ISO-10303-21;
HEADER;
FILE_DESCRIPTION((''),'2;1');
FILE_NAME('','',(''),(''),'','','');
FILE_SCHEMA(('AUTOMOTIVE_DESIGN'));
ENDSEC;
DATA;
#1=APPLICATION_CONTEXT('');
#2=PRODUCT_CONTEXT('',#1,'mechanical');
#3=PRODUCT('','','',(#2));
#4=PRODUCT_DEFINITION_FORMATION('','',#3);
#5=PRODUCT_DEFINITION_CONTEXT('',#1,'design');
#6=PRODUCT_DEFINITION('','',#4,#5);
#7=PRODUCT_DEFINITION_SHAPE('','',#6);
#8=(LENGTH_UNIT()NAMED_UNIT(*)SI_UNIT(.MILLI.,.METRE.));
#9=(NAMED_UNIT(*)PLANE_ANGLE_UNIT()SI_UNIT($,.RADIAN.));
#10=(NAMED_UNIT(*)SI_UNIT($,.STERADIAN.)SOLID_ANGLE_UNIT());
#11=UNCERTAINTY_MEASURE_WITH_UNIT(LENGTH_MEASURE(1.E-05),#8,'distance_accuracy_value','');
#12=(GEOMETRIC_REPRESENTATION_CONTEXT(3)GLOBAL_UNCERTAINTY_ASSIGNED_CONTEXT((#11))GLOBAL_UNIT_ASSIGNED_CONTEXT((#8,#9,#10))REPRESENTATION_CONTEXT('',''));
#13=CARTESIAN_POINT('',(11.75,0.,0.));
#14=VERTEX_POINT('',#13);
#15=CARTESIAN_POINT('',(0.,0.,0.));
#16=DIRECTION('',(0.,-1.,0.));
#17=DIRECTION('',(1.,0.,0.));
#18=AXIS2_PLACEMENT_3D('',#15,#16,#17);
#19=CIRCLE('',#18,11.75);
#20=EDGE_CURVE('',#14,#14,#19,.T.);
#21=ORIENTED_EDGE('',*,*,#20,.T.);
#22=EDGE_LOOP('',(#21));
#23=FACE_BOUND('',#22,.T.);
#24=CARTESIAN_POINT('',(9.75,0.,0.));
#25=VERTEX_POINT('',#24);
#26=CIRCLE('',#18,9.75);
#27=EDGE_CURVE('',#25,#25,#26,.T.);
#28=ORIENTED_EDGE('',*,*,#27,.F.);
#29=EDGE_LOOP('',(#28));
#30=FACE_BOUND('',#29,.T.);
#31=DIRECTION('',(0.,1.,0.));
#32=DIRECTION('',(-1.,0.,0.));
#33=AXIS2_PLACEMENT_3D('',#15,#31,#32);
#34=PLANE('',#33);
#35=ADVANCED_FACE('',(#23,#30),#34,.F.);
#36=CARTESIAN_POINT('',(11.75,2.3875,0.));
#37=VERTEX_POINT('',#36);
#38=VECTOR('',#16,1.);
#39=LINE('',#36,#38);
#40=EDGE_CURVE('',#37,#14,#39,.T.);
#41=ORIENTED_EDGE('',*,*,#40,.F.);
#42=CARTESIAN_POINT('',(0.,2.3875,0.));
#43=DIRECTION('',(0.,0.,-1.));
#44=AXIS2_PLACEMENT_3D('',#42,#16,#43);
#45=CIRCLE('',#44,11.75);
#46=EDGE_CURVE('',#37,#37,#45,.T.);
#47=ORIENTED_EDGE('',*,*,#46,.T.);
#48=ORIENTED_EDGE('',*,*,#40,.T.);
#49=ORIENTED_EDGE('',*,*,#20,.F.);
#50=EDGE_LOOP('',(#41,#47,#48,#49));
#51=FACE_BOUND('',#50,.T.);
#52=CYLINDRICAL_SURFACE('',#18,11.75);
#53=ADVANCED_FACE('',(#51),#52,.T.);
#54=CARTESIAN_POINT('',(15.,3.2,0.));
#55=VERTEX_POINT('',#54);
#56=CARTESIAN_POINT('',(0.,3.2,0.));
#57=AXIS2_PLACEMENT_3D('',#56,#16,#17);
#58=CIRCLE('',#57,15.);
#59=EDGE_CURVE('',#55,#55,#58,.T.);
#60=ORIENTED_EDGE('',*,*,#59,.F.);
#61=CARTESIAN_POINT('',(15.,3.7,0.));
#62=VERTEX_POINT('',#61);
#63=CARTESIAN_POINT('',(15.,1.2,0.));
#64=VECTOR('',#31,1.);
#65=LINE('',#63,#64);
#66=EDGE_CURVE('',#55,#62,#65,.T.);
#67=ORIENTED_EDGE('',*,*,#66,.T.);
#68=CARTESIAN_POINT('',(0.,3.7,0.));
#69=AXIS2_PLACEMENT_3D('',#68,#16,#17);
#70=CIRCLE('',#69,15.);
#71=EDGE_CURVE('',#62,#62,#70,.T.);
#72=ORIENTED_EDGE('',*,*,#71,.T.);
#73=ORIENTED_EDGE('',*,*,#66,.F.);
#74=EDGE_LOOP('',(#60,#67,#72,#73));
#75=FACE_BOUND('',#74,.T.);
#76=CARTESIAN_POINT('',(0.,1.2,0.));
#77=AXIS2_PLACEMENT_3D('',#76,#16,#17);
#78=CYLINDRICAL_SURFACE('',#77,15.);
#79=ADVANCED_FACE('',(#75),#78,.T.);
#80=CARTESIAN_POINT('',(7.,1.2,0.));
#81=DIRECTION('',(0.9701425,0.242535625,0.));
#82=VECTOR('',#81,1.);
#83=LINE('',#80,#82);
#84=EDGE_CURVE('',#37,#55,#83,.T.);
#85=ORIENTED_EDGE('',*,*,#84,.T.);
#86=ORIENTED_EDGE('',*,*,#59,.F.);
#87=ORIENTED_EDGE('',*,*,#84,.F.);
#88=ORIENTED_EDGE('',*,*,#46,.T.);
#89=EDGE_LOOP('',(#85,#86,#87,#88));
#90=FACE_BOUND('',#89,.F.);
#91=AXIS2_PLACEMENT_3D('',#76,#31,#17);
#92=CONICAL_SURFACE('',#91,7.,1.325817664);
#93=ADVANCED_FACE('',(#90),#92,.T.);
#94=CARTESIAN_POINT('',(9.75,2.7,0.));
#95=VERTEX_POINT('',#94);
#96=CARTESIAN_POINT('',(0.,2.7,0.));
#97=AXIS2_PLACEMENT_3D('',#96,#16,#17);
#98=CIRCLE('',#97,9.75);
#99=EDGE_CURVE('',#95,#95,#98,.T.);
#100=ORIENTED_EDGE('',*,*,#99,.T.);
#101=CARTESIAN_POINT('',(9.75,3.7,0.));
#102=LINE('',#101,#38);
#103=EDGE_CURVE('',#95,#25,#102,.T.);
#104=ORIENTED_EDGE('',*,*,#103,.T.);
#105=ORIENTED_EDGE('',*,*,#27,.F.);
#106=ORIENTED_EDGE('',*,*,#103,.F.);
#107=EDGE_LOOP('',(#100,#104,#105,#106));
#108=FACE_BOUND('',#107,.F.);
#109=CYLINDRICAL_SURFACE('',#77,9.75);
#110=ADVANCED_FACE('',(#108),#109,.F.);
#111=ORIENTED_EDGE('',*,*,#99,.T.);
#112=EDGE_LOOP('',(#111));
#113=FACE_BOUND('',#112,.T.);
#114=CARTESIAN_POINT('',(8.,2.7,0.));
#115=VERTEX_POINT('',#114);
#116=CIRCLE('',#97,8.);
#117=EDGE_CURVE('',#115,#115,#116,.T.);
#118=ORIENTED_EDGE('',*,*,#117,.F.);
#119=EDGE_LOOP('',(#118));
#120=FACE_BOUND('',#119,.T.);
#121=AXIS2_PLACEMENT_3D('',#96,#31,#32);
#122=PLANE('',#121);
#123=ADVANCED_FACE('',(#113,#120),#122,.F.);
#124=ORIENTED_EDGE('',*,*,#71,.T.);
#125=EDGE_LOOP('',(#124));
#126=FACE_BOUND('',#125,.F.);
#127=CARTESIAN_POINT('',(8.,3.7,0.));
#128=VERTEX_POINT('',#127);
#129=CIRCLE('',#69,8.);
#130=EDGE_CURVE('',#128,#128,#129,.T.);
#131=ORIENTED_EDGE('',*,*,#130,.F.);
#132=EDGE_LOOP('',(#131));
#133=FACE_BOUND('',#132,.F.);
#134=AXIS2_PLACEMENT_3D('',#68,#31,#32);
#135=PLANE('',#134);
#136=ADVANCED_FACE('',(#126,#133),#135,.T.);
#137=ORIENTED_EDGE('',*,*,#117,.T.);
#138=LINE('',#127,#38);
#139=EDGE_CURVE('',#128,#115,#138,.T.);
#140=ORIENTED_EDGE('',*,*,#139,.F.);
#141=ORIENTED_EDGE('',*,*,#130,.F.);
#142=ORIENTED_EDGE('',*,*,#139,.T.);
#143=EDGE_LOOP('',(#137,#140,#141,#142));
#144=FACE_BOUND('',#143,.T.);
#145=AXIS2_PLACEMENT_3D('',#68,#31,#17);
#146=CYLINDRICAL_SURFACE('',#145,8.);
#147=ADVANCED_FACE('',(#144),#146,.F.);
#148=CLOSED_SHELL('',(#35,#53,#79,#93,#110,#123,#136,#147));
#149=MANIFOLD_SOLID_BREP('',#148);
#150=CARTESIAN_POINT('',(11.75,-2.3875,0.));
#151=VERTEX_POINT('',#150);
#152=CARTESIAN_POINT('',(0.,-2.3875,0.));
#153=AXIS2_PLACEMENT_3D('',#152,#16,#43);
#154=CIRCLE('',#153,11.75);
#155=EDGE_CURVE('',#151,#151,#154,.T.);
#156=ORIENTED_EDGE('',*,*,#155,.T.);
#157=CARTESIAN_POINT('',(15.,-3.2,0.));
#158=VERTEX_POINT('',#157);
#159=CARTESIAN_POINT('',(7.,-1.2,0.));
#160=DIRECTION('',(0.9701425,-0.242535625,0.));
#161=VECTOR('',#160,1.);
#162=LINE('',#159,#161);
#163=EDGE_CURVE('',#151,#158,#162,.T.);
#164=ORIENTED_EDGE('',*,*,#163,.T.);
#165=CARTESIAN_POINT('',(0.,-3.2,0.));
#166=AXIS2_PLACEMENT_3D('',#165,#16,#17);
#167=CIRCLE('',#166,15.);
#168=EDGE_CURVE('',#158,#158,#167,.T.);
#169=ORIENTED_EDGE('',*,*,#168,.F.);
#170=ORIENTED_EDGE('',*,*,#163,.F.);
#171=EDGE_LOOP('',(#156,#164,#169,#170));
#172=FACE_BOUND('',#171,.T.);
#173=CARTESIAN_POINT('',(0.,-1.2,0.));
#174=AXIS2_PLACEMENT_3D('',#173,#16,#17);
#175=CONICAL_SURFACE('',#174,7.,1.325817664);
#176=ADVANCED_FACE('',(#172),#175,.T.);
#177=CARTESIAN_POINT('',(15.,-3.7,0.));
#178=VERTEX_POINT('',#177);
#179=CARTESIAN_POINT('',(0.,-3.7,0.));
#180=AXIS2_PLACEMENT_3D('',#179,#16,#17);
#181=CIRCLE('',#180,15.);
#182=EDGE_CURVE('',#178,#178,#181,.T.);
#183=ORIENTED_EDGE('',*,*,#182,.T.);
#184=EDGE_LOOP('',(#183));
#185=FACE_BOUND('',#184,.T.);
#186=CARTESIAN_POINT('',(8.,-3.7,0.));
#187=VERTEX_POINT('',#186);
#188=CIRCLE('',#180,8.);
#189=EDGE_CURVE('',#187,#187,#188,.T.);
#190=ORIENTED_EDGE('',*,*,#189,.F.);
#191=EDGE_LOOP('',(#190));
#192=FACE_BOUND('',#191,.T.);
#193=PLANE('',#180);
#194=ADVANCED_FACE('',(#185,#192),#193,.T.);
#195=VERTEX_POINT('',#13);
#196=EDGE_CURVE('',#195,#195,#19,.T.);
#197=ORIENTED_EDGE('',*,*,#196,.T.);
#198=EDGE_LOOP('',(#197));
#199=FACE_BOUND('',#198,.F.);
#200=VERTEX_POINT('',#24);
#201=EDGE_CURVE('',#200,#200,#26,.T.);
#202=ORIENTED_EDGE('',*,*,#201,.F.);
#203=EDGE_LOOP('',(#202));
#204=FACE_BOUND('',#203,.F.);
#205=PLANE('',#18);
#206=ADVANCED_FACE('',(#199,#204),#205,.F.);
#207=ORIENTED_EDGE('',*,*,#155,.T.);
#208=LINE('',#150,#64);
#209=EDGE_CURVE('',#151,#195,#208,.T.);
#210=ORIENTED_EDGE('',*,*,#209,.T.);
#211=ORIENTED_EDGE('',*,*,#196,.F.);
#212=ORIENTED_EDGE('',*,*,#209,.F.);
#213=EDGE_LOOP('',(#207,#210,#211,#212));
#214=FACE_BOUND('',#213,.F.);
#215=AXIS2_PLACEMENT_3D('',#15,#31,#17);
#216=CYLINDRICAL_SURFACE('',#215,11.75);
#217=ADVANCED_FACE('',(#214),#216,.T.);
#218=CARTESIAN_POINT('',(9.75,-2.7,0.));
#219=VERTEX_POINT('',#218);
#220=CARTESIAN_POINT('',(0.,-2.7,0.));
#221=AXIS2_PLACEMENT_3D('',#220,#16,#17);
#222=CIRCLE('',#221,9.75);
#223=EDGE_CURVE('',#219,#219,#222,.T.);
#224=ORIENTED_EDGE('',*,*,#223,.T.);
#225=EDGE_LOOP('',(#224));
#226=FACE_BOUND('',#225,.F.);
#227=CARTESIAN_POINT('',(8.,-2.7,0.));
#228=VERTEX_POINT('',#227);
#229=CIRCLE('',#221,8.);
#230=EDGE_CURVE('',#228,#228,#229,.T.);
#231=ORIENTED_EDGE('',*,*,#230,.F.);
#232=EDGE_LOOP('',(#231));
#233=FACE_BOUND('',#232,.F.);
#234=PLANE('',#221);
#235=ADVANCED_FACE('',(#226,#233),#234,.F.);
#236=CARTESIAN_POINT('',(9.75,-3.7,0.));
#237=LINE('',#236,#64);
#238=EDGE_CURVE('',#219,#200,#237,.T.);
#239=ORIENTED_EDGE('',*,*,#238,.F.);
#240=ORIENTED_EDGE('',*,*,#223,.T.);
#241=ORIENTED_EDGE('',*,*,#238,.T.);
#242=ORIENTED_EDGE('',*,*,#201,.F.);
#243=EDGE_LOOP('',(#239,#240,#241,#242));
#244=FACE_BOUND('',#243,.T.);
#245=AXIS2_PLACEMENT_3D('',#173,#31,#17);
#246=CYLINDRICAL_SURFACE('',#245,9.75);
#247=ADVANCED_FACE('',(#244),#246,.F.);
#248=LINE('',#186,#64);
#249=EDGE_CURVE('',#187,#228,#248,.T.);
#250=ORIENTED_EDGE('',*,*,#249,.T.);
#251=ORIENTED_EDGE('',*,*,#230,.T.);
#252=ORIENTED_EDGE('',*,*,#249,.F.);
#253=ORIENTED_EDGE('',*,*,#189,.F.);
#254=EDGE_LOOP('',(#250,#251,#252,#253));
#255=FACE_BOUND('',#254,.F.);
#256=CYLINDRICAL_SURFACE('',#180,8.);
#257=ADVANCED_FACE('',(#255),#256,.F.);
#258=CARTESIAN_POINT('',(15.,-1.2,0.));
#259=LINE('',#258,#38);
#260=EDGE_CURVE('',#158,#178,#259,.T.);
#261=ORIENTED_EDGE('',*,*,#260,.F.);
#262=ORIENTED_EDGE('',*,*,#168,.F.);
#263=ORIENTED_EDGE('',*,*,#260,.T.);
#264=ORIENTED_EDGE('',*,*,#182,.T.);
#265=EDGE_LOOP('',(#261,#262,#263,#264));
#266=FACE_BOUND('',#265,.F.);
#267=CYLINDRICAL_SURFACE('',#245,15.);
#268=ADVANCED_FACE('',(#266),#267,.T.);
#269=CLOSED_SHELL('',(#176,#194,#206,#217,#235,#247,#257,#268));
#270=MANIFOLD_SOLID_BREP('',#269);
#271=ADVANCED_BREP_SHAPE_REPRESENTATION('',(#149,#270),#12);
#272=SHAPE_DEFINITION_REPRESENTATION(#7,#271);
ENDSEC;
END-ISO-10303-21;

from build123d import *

# Parameters (mm, degrees)
F0_R        = 11.75
F0_R_2      = 9.75
F1_DEPTH    = 1.2
F2_R        = 15
F2_R_2      = 11.75
F2_R_3      = 9.75
F3_DEPTH    = 2.5
F4_S5_R     = 11.75
F4_T6_DEPTH = 23
F5_R        = 9.75
F5_R_2      = 8
F6_DEPTH    = 1


# Not quite as in the source:
# - a fillet or chamfer that OpenCascade refuses, or shapes differently, is made with other operations: its cross-section is extruded or revolved along the edge and cut away or added


with BuildPart() as f1:
    # F0 (on Front) → F1 (new body)
    with BuildSketch(Plane.XZ):
        Circle(F0_R)
        Circle(F0_R_2, mode=Mode.SUBTRACT)
    extrude(amount=F1_DEPTH)

    # F2 (on face) → F3 (join)
    with BuildSketch(Plane.XZ.offset(1.2)):
        Circle(F2_R)
        Circle(F2_R_2, mode=Mode.SUBTRACT)
        Circle(F2_R_2)
        Circle(F2_R_3, mode=Mode.SUBTRACT)
    extrude(amount=F3_DEPTH)

    # F4: chamfer of 2 x 8 on 1 edges, made by hand


with BuildPart() as f4_tool2:
    # F4_s3 → F4_t4 (revolve)
    with BuildSketch(Plane.XY):
        Polygon((7, -1.2), (15, -3.2), (15, -1.2), align=None)
    revolve(axis=Axis((0, -1.2, 0), (0, -1, 0)))

    # F4_s5 → F4_t6 (cut, symmetric)
    with BuildSketch(Plane.XZ.offset(2.2)):
        Circle(F4_S5_R)
    extrude(amount=F4_T6_DEPTH, both=True, mode=Mode.SUBTRACT)


with BuildPart() as f1_1:
    add(f1.part)

    # F4_t1: cut F4_tool2
    add(f4_tool2.part, mode=Mode.SUBTRACT)

    # F5 (on face) → F6 (join)
    with BuildSketch(Plane.XZ.offset(3.7)):
        Circle(F5_R)
        Circle(F5_R_2, mode=Mode.SUBTRACT)
    extrude(amount=-F6_DEPTH)


with BuildPart() as f7_1:
    # F7: instance of F1
    add(f1_1.part.mirror(Plane(origin=(0, 0, 0), x_dir=(1, 0, 0), z_dir=(0, 1, 0))))


solid = Compound([f1_1.part, f7_1.part])
